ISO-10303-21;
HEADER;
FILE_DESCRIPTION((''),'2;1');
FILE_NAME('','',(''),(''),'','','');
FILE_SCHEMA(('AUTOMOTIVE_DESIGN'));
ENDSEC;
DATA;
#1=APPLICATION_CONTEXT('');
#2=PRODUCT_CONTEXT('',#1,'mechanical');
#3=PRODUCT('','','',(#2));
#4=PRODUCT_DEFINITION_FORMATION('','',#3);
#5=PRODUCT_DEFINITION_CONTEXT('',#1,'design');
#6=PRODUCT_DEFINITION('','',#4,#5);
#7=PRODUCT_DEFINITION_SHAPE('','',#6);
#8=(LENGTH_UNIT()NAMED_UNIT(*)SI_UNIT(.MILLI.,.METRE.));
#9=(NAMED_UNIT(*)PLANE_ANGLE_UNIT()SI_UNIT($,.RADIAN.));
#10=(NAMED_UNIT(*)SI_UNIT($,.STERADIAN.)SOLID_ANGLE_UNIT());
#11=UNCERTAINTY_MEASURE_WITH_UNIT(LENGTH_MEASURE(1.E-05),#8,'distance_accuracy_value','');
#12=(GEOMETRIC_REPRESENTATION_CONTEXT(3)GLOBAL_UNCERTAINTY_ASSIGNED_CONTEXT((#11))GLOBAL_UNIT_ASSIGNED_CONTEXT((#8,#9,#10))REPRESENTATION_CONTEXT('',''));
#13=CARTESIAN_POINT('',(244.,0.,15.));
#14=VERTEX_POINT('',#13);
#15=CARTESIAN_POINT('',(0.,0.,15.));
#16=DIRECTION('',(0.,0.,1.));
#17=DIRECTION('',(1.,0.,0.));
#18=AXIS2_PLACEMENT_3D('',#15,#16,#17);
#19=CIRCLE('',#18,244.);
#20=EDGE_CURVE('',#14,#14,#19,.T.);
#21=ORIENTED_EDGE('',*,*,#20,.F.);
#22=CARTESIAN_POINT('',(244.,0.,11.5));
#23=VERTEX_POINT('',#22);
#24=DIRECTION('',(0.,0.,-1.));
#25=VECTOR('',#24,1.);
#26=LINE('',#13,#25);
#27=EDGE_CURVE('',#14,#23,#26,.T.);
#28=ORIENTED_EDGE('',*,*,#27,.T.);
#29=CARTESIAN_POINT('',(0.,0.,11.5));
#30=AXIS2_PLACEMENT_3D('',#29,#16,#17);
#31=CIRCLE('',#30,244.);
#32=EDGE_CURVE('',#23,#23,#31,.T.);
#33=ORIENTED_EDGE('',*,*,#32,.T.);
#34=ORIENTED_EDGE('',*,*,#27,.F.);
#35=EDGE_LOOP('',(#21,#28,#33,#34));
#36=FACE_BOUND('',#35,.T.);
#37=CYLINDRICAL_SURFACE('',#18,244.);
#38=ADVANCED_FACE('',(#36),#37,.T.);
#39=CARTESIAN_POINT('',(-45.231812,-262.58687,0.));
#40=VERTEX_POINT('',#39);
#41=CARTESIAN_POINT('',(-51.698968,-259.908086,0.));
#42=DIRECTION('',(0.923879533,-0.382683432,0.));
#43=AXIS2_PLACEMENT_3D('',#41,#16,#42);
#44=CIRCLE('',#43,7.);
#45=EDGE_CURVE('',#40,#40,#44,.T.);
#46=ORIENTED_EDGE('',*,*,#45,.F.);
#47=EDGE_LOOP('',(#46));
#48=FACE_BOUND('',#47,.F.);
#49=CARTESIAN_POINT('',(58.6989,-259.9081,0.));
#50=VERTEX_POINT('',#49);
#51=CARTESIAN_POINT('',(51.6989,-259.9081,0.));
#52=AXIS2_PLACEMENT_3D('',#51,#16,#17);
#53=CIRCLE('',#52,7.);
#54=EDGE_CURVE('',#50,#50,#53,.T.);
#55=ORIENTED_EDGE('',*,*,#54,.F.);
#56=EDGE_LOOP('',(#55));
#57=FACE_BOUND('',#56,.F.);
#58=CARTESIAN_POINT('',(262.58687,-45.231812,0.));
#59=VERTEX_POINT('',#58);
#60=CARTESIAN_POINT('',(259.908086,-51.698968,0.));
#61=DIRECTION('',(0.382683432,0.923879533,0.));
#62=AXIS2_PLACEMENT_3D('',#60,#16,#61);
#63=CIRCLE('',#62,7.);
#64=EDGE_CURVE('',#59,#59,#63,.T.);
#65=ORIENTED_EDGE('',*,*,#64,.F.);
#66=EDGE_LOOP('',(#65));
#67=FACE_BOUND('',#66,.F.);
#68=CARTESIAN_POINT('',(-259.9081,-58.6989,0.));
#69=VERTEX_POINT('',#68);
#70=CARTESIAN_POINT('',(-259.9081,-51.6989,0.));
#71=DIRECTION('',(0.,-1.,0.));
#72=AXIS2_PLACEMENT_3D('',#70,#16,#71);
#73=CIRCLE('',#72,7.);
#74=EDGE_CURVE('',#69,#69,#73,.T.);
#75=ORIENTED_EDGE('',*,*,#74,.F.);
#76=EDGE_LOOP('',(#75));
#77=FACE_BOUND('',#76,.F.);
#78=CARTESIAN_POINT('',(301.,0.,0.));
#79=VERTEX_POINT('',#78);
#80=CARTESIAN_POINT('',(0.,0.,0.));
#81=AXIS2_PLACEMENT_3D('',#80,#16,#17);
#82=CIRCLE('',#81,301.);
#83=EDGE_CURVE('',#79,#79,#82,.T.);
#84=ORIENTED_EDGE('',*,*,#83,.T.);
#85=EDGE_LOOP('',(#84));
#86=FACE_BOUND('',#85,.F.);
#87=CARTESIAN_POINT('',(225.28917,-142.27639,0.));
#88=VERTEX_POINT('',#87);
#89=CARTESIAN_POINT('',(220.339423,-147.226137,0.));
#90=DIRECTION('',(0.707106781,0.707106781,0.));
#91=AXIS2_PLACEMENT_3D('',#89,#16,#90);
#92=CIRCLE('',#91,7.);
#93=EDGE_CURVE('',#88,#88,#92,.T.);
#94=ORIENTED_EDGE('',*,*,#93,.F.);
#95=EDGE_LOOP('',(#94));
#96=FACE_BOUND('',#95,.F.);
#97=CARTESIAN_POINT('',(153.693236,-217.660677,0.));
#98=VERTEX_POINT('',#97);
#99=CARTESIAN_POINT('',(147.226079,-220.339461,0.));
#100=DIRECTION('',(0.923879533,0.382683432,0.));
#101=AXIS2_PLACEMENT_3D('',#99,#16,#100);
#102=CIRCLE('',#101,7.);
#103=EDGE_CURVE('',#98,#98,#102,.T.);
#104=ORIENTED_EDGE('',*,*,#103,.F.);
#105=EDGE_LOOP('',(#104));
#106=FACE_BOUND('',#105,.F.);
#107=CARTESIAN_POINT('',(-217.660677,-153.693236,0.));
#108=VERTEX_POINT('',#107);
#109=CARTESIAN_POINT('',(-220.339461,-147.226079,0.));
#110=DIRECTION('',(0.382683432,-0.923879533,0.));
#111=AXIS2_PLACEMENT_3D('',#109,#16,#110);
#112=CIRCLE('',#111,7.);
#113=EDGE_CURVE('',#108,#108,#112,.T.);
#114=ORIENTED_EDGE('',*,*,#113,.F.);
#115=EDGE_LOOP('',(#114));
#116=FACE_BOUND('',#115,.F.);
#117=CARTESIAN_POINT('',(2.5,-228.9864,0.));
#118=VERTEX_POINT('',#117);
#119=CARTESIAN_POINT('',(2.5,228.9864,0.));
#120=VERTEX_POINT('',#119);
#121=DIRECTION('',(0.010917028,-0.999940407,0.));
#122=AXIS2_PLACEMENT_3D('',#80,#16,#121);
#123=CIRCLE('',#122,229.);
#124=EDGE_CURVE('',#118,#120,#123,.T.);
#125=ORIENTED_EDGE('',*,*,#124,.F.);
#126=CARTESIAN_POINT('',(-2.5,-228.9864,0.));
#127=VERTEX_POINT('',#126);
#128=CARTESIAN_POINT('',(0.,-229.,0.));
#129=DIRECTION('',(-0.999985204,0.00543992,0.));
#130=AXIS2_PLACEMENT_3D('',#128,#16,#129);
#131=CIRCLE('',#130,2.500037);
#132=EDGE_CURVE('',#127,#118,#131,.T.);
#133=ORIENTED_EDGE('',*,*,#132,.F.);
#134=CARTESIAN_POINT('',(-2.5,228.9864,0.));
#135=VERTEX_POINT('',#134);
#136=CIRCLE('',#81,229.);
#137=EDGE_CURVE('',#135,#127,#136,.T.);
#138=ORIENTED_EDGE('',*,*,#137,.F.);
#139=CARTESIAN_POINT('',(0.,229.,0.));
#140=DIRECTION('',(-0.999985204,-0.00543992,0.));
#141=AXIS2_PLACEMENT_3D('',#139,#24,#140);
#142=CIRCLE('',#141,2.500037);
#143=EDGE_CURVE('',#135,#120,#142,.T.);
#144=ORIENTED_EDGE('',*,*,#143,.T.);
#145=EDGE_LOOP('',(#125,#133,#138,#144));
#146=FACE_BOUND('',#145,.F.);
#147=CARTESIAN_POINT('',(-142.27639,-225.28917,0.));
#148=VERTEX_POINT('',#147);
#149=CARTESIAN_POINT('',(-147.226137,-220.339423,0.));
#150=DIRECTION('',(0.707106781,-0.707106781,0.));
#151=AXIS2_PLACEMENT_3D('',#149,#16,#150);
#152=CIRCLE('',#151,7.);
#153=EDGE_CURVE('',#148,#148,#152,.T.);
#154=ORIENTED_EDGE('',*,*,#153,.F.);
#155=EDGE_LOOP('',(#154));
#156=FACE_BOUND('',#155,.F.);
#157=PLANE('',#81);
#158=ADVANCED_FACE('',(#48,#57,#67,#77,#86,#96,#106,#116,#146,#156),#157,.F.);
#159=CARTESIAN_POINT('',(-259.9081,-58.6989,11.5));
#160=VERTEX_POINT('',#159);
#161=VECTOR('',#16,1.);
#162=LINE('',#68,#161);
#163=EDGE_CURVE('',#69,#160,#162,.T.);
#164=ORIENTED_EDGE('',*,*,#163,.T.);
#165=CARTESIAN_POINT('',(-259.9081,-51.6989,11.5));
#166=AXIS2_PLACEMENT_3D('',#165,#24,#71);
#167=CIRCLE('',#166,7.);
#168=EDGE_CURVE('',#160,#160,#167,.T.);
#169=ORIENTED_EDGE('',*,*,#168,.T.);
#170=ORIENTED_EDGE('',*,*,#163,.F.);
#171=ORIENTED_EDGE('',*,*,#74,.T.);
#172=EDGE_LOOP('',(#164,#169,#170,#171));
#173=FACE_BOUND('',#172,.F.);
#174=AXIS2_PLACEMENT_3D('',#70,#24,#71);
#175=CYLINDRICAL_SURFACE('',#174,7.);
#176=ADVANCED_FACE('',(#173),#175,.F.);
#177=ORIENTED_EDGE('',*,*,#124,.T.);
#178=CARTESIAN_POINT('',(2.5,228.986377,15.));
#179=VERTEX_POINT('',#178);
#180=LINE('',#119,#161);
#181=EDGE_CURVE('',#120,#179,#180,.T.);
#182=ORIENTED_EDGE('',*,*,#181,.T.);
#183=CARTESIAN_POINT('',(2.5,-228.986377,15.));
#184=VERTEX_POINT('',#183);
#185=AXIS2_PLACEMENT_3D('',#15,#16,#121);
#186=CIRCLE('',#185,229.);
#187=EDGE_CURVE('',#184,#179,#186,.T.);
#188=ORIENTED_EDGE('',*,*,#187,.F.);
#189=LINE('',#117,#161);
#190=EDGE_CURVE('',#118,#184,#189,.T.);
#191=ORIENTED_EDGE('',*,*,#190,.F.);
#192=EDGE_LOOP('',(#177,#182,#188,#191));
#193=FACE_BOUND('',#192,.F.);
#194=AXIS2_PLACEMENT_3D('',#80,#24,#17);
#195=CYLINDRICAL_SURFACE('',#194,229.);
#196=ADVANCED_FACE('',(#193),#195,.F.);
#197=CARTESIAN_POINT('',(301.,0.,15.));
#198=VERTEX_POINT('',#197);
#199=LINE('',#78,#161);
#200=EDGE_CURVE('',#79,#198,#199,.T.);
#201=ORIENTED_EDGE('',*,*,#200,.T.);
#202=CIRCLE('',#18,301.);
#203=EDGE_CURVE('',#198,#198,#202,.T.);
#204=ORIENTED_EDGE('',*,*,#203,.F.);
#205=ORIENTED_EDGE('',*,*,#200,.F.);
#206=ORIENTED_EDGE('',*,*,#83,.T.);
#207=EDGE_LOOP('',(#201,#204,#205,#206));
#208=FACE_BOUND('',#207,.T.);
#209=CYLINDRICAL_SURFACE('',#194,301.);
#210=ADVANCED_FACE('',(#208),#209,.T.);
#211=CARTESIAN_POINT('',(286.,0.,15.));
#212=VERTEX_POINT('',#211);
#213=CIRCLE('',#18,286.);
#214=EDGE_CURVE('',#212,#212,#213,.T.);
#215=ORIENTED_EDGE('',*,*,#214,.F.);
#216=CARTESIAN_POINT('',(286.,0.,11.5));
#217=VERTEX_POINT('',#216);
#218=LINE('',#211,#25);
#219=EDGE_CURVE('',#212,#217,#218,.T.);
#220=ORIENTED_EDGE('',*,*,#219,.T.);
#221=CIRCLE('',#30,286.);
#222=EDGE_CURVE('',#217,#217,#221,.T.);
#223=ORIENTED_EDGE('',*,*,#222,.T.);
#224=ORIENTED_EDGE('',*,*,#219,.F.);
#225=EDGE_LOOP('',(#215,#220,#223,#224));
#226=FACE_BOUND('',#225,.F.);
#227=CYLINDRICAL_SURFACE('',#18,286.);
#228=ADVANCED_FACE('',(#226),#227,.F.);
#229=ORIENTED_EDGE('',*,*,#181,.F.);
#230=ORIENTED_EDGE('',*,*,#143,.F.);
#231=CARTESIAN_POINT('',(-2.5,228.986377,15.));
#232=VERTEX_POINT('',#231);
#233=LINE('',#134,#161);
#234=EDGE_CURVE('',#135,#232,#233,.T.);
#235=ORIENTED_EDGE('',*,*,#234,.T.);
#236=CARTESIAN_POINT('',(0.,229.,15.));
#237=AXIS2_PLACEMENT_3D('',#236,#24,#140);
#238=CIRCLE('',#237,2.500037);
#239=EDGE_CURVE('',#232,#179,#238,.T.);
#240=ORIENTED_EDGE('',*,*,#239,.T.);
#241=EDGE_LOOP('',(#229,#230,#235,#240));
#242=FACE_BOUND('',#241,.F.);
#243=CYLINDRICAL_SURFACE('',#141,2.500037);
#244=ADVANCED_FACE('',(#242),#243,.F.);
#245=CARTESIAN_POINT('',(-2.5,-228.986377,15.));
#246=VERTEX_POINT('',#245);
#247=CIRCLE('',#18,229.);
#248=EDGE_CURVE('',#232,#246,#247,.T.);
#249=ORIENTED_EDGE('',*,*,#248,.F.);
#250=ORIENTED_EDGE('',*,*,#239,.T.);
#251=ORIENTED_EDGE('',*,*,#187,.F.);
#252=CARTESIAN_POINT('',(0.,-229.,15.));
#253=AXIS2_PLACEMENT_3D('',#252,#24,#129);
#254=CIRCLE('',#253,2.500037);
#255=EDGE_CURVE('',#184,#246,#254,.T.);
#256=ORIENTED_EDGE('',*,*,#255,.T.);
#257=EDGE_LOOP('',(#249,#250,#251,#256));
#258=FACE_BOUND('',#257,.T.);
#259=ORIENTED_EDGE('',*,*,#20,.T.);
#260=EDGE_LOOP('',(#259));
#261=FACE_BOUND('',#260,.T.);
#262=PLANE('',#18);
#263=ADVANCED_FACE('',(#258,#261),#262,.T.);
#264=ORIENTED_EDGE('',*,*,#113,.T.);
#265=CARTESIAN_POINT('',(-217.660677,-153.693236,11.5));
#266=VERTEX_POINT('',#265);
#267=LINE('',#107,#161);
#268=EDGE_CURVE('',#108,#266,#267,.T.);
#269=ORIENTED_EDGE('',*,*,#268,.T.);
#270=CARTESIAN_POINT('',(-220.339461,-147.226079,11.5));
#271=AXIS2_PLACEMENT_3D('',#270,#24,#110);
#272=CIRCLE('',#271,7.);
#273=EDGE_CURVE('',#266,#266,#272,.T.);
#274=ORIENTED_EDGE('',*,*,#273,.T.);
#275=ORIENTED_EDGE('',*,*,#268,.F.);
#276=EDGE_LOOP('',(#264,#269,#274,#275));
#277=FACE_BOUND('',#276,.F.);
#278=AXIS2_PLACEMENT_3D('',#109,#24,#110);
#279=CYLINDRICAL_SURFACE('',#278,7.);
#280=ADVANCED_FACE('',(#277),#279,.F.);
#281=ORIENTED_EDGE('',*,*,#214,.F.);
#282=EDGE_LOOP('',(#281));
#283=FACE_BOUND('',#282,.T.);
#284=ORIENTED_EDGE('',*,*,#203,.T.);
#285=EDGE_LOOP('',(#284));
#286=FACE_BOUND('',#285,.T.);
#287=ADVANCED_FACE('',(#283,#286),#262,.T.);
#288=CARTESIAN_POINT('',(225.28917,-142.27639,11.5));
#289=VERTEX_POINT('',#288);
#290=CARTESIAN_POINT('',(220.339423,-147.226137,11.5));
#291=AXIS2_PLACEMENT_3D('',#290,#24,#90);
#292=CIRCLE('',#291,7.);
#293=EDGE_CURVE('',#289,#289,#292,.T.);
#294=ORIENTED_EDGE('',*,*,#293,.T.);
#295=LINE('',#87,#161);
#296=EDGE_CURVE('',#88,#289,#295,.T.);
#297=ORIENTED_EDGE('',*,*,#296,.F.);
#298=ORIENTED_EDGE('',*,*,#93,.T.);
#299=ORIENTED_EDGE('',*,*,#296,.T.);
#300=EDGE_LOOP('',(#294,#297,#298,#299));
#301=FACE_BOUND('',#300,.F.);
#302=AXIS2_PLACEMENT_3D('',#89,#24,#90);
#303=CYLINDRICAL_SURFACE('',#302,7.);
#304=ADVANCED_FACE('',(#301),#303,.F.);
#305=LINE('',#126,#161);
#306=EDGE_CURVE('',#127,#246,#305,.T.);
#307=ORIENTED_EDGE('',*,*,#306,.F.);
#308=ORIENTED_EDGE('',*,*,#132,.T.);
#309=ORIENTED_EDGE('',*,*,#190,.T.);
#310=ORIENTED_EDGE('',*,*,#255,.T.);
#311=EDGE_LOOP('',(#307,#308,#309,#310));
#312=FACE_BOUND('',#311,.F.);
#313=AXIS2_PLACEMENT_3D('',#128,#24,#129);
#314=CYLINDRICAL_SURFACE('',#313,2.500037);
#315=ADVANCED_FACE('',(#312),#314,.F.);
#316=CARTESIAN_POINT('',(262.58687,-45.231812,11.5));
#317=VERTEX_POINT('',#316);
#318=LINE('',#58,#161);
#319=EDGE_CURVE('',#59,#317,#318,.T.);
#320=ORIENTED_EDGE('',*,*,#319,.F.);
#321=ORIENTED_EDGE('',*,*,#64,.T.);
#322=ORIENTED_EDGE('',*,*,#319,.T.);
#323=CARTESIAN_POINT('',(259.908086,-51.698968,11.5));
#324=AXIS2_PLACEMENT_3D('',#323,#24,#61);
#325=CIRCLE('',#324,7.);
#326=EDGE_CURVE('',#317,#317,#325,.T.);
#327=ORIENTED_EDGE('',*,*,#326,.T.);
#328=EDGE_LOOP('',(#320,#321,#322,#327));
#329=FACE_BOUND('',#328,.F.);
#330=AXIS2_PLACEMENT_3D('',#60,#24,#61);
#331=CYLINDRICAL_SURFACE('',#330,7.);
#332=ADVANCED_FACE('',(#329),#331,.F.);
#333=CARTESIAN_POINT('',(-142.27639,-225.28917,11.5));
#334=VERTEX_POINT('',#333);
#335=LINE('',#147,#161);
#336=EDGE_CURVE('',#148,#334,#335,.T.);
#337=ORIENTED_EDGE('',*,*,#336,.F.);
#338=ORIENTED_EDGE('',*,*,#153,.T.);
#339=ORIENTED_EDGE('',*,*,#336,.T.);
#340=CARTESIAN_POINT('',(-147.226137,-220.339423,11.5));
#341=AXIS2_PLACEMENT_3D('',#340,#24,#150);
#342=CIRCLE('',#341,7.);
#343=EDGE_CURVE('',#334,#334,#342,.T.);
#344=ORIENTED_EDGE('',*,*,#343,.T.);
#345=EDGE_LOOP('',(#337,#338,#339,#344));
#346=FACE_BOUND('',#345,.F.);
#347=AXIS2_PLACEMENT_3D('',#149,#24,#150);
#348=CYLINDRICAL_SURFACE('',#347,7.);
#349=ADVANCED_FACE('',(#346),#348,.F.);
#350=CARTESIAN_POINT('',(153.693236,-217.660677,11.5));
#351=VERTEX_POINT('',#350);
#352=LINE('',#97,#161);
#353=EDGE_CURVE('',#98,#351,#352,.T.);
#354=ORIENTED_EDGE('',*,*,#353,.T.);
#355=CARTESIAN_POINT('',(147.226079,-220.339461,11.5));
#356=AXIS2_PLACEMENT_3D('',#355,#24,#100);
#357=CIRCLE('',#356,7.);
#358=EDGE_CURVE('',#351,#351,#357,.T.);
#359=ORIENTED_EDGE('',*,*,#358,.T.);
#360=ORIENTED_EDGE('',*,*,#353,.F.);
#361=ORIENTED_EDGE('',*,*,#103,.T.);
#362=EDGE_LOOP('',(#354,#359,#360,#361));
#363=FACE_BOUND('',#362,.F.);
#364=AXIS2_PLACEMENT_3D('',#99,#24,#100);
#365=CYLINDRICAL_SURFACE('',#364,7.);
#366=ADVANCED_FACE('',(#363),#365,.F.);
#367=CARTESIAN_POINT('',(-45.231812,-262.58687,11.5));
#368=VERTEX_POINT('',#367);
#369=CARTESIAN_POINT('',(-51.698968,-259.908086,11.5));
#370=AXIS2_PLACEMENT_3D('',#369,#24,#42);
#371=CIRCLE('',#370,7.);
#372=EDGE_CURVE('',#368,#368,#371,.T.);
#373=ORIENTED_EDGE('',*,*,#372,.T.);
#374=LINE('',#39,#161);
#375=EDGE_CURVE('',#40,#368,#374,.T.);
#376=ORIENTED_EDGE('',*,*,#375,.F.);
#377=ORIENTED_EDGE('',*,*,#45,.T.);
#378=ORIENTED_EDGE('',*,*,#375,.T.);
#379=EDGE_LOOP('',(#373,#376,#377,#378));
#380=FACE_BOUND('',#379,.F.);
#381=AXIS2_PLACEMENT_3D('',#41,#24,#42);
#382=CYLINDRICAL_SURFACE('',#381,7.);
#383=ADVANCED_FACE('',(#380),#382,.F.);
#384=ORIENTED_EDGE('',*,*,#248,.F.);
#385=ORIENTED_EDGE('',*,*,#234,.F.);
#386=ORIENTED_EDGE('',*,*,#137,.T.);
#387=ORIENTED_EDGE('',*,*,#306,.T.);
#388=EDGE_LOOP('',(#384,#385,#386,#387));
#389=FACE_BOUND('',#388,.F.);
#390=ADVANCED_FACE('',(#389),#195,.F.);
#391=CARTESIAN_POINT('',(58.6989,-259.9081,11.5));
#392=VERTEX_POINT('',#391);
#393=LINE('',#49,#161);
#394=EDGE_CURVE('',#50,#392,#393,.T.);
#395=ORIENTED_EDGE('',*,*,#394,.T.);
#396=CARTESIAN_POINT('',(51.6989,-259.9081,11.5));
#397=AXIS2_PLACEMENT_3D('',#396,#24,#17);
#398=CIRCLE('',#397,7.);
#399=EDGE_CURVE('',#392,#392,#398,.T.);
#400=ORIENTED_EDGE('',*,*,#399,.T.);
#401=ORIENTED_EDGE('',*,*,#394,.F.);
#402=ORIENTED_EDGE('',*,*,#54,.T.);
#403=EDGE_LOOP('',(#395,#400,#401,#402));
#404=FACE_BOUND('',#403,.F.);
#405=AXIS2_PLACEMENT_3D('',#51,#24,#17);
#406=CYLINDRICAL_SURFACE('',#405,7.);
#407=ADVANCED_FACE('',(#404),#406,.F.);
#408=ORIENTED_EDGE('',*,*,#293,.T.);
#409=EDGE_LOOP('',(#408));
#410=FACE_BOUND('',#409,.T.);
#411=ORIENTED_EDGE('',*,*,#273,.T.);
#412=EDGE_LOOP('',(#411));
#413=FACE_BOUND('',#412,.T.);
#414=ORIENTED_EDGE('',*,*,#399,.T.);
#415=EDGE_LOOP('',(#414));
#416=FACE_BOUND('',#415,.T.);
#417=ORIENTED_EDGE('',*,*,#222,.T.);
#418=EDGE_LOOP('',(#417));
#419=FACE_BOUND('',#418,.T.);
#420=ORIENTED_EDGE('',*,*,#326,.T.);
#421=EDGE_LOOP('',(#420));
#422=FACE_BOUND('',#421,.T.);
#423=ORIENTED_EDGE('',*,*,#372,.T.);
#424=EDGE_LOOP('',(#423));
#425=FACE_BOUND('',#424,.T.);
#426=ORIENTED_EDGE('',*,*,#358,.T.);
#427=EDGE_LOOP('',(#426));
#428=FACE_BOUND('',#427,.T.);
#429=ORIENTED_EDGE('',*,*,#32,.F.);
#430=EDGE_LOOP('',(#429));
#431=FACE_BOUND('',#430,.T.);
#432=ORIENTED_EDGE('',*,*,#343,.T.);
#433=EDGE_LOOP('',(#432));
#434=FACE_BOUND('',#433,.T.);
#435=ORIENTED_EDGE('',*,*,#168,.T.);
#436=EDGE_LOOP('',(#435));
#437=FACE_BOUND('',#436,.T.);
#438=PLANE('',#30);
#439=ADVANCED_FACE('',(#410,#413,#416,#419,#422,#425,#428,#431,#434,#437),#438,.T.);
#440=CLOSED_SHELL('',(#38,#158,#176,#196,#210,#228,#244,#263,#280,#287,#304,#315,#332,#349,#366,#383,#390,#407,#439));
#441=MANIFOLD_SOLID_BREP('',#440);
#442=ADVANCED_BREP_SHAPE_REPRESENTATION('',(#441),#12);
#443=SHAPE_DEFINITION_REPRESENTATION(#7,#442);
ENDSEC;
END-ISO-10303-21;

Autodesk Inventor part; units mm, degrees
ref_plane "YZ Plane" through (0, 0, 0) normal (1, 0, 0) x (0, 1, 0)
ref_plane "XZ Plane" through (0, 0, 0) normal (0, 1, 0) x (-1, 0, 0)
ref_plane "XY Plane" through (0, 0, 0) normal (0, 0, 1) x (1, 0, 0)
sketch "Sketch1" plane through (0, 0, 0) normal (0, 0, 1) x (1, 0, 0)
  circle A0 centre (0, 0) radius 229
  circle A1 centre (0, 0) radius 301
  circle A2 centre (0, 0) radius 265 construction
  line L0 (0, 229) -> (0, 301) construction
  point P0 (0, 265)
  dimension "d17" = 530
  dimension "d18" = 72
extrude "Extrusion1" add sketch "Sketch1" along normal blind 15
sketch "Sketch2" plane through (0, 0, 15) normal (0, 0, 1) x (1, 0, 0)
  circle A0 centre (0, 0) radius 301 construction
  circle A1 centre (0, 0) radius 229 construction
  line L0 (0, 286) -> (0, 244) construction
  line L1 (0, 229) -> (0, 0) construction
  circle A2 centre (0, 0) radius 244
  circle A3 centre (0, 0) radius 286
  circle A4 centre (0, 0) radius 265 construction
  point P0 (0, 265)
  dimension "d19" = 530
  dimension "d4" = 42
extrude "Extrusion2" cut sketch "Sketch2" against normal blind 3.5
sketch "Sketch3" plane through (0, 0, 0) normal (0, 0, 1) x (1, 0, 0)
  circle A0 centre (0, 0) radius 229 construction
  circle A1 centre (0, 0) radius 301 construction
  circle A2 centre (0, 0) radius 244 projected
  circle A3 centre (0, 0) radius 286 projected
  circle A4 centre (0, 0) radius 301 projected
  line L0 (0, 0) -> (0, -301) construction
  line L1 (0, 0) -> (58.7222, -295.2164) construction
  line L2 (47.602, -239.3116) -> (55.7958, -280.5046) construction
  circle A5 centre (51.6989, -259.9081) radius 7
  dimension "d20" = 11.25
  dimension "d21" = 14
extrude "Extrusion3" cut sketch "Sketch3" along normal through all contours A5
pattern_circular "Circular Pattern2" count 8 over 157.5 about axis through (0, 0, 0) along (0, 0, -1) of "Extrusion3" both ways yes
sketch "Sketch5" plane through (0, 0, 0) normal (0, 0, -1) x (-1, 0, 0)
  circle A0 centre (0, 0) radius 301 projected
  circle A1 centre (0, 0) radius 229 projected
  line L0 (0, 0) -> (0, 229) construction
  arc A2 (2.5, 228.9864) -> (-2.5, 228.9864) centre (0, 229) ccw
  dimension "d40" = 5
extrude "Extrusion4" cut sketch "Sketch5" against normal through all contours A1 A2
mirror "Mirror1" about plane through (0, 0, 0) normal (0, 1, 0) of "Extrusion4"
equation "\"d17\" = Шпил_пласт_КОРМА_диам_центров"
equation "\"d19\" = Шпил_пласт_КОРМА_диам_центров"
equation "\"BendReliefDepth\" = 0.5 * Thickness"
equation "\"Шпил_пласт_КОРМА_диам_центров\" = 530"
equation "\"Thickness\" = 10"
properties part number "ДМФ 022 кольцо прижимное корма v2.0"
